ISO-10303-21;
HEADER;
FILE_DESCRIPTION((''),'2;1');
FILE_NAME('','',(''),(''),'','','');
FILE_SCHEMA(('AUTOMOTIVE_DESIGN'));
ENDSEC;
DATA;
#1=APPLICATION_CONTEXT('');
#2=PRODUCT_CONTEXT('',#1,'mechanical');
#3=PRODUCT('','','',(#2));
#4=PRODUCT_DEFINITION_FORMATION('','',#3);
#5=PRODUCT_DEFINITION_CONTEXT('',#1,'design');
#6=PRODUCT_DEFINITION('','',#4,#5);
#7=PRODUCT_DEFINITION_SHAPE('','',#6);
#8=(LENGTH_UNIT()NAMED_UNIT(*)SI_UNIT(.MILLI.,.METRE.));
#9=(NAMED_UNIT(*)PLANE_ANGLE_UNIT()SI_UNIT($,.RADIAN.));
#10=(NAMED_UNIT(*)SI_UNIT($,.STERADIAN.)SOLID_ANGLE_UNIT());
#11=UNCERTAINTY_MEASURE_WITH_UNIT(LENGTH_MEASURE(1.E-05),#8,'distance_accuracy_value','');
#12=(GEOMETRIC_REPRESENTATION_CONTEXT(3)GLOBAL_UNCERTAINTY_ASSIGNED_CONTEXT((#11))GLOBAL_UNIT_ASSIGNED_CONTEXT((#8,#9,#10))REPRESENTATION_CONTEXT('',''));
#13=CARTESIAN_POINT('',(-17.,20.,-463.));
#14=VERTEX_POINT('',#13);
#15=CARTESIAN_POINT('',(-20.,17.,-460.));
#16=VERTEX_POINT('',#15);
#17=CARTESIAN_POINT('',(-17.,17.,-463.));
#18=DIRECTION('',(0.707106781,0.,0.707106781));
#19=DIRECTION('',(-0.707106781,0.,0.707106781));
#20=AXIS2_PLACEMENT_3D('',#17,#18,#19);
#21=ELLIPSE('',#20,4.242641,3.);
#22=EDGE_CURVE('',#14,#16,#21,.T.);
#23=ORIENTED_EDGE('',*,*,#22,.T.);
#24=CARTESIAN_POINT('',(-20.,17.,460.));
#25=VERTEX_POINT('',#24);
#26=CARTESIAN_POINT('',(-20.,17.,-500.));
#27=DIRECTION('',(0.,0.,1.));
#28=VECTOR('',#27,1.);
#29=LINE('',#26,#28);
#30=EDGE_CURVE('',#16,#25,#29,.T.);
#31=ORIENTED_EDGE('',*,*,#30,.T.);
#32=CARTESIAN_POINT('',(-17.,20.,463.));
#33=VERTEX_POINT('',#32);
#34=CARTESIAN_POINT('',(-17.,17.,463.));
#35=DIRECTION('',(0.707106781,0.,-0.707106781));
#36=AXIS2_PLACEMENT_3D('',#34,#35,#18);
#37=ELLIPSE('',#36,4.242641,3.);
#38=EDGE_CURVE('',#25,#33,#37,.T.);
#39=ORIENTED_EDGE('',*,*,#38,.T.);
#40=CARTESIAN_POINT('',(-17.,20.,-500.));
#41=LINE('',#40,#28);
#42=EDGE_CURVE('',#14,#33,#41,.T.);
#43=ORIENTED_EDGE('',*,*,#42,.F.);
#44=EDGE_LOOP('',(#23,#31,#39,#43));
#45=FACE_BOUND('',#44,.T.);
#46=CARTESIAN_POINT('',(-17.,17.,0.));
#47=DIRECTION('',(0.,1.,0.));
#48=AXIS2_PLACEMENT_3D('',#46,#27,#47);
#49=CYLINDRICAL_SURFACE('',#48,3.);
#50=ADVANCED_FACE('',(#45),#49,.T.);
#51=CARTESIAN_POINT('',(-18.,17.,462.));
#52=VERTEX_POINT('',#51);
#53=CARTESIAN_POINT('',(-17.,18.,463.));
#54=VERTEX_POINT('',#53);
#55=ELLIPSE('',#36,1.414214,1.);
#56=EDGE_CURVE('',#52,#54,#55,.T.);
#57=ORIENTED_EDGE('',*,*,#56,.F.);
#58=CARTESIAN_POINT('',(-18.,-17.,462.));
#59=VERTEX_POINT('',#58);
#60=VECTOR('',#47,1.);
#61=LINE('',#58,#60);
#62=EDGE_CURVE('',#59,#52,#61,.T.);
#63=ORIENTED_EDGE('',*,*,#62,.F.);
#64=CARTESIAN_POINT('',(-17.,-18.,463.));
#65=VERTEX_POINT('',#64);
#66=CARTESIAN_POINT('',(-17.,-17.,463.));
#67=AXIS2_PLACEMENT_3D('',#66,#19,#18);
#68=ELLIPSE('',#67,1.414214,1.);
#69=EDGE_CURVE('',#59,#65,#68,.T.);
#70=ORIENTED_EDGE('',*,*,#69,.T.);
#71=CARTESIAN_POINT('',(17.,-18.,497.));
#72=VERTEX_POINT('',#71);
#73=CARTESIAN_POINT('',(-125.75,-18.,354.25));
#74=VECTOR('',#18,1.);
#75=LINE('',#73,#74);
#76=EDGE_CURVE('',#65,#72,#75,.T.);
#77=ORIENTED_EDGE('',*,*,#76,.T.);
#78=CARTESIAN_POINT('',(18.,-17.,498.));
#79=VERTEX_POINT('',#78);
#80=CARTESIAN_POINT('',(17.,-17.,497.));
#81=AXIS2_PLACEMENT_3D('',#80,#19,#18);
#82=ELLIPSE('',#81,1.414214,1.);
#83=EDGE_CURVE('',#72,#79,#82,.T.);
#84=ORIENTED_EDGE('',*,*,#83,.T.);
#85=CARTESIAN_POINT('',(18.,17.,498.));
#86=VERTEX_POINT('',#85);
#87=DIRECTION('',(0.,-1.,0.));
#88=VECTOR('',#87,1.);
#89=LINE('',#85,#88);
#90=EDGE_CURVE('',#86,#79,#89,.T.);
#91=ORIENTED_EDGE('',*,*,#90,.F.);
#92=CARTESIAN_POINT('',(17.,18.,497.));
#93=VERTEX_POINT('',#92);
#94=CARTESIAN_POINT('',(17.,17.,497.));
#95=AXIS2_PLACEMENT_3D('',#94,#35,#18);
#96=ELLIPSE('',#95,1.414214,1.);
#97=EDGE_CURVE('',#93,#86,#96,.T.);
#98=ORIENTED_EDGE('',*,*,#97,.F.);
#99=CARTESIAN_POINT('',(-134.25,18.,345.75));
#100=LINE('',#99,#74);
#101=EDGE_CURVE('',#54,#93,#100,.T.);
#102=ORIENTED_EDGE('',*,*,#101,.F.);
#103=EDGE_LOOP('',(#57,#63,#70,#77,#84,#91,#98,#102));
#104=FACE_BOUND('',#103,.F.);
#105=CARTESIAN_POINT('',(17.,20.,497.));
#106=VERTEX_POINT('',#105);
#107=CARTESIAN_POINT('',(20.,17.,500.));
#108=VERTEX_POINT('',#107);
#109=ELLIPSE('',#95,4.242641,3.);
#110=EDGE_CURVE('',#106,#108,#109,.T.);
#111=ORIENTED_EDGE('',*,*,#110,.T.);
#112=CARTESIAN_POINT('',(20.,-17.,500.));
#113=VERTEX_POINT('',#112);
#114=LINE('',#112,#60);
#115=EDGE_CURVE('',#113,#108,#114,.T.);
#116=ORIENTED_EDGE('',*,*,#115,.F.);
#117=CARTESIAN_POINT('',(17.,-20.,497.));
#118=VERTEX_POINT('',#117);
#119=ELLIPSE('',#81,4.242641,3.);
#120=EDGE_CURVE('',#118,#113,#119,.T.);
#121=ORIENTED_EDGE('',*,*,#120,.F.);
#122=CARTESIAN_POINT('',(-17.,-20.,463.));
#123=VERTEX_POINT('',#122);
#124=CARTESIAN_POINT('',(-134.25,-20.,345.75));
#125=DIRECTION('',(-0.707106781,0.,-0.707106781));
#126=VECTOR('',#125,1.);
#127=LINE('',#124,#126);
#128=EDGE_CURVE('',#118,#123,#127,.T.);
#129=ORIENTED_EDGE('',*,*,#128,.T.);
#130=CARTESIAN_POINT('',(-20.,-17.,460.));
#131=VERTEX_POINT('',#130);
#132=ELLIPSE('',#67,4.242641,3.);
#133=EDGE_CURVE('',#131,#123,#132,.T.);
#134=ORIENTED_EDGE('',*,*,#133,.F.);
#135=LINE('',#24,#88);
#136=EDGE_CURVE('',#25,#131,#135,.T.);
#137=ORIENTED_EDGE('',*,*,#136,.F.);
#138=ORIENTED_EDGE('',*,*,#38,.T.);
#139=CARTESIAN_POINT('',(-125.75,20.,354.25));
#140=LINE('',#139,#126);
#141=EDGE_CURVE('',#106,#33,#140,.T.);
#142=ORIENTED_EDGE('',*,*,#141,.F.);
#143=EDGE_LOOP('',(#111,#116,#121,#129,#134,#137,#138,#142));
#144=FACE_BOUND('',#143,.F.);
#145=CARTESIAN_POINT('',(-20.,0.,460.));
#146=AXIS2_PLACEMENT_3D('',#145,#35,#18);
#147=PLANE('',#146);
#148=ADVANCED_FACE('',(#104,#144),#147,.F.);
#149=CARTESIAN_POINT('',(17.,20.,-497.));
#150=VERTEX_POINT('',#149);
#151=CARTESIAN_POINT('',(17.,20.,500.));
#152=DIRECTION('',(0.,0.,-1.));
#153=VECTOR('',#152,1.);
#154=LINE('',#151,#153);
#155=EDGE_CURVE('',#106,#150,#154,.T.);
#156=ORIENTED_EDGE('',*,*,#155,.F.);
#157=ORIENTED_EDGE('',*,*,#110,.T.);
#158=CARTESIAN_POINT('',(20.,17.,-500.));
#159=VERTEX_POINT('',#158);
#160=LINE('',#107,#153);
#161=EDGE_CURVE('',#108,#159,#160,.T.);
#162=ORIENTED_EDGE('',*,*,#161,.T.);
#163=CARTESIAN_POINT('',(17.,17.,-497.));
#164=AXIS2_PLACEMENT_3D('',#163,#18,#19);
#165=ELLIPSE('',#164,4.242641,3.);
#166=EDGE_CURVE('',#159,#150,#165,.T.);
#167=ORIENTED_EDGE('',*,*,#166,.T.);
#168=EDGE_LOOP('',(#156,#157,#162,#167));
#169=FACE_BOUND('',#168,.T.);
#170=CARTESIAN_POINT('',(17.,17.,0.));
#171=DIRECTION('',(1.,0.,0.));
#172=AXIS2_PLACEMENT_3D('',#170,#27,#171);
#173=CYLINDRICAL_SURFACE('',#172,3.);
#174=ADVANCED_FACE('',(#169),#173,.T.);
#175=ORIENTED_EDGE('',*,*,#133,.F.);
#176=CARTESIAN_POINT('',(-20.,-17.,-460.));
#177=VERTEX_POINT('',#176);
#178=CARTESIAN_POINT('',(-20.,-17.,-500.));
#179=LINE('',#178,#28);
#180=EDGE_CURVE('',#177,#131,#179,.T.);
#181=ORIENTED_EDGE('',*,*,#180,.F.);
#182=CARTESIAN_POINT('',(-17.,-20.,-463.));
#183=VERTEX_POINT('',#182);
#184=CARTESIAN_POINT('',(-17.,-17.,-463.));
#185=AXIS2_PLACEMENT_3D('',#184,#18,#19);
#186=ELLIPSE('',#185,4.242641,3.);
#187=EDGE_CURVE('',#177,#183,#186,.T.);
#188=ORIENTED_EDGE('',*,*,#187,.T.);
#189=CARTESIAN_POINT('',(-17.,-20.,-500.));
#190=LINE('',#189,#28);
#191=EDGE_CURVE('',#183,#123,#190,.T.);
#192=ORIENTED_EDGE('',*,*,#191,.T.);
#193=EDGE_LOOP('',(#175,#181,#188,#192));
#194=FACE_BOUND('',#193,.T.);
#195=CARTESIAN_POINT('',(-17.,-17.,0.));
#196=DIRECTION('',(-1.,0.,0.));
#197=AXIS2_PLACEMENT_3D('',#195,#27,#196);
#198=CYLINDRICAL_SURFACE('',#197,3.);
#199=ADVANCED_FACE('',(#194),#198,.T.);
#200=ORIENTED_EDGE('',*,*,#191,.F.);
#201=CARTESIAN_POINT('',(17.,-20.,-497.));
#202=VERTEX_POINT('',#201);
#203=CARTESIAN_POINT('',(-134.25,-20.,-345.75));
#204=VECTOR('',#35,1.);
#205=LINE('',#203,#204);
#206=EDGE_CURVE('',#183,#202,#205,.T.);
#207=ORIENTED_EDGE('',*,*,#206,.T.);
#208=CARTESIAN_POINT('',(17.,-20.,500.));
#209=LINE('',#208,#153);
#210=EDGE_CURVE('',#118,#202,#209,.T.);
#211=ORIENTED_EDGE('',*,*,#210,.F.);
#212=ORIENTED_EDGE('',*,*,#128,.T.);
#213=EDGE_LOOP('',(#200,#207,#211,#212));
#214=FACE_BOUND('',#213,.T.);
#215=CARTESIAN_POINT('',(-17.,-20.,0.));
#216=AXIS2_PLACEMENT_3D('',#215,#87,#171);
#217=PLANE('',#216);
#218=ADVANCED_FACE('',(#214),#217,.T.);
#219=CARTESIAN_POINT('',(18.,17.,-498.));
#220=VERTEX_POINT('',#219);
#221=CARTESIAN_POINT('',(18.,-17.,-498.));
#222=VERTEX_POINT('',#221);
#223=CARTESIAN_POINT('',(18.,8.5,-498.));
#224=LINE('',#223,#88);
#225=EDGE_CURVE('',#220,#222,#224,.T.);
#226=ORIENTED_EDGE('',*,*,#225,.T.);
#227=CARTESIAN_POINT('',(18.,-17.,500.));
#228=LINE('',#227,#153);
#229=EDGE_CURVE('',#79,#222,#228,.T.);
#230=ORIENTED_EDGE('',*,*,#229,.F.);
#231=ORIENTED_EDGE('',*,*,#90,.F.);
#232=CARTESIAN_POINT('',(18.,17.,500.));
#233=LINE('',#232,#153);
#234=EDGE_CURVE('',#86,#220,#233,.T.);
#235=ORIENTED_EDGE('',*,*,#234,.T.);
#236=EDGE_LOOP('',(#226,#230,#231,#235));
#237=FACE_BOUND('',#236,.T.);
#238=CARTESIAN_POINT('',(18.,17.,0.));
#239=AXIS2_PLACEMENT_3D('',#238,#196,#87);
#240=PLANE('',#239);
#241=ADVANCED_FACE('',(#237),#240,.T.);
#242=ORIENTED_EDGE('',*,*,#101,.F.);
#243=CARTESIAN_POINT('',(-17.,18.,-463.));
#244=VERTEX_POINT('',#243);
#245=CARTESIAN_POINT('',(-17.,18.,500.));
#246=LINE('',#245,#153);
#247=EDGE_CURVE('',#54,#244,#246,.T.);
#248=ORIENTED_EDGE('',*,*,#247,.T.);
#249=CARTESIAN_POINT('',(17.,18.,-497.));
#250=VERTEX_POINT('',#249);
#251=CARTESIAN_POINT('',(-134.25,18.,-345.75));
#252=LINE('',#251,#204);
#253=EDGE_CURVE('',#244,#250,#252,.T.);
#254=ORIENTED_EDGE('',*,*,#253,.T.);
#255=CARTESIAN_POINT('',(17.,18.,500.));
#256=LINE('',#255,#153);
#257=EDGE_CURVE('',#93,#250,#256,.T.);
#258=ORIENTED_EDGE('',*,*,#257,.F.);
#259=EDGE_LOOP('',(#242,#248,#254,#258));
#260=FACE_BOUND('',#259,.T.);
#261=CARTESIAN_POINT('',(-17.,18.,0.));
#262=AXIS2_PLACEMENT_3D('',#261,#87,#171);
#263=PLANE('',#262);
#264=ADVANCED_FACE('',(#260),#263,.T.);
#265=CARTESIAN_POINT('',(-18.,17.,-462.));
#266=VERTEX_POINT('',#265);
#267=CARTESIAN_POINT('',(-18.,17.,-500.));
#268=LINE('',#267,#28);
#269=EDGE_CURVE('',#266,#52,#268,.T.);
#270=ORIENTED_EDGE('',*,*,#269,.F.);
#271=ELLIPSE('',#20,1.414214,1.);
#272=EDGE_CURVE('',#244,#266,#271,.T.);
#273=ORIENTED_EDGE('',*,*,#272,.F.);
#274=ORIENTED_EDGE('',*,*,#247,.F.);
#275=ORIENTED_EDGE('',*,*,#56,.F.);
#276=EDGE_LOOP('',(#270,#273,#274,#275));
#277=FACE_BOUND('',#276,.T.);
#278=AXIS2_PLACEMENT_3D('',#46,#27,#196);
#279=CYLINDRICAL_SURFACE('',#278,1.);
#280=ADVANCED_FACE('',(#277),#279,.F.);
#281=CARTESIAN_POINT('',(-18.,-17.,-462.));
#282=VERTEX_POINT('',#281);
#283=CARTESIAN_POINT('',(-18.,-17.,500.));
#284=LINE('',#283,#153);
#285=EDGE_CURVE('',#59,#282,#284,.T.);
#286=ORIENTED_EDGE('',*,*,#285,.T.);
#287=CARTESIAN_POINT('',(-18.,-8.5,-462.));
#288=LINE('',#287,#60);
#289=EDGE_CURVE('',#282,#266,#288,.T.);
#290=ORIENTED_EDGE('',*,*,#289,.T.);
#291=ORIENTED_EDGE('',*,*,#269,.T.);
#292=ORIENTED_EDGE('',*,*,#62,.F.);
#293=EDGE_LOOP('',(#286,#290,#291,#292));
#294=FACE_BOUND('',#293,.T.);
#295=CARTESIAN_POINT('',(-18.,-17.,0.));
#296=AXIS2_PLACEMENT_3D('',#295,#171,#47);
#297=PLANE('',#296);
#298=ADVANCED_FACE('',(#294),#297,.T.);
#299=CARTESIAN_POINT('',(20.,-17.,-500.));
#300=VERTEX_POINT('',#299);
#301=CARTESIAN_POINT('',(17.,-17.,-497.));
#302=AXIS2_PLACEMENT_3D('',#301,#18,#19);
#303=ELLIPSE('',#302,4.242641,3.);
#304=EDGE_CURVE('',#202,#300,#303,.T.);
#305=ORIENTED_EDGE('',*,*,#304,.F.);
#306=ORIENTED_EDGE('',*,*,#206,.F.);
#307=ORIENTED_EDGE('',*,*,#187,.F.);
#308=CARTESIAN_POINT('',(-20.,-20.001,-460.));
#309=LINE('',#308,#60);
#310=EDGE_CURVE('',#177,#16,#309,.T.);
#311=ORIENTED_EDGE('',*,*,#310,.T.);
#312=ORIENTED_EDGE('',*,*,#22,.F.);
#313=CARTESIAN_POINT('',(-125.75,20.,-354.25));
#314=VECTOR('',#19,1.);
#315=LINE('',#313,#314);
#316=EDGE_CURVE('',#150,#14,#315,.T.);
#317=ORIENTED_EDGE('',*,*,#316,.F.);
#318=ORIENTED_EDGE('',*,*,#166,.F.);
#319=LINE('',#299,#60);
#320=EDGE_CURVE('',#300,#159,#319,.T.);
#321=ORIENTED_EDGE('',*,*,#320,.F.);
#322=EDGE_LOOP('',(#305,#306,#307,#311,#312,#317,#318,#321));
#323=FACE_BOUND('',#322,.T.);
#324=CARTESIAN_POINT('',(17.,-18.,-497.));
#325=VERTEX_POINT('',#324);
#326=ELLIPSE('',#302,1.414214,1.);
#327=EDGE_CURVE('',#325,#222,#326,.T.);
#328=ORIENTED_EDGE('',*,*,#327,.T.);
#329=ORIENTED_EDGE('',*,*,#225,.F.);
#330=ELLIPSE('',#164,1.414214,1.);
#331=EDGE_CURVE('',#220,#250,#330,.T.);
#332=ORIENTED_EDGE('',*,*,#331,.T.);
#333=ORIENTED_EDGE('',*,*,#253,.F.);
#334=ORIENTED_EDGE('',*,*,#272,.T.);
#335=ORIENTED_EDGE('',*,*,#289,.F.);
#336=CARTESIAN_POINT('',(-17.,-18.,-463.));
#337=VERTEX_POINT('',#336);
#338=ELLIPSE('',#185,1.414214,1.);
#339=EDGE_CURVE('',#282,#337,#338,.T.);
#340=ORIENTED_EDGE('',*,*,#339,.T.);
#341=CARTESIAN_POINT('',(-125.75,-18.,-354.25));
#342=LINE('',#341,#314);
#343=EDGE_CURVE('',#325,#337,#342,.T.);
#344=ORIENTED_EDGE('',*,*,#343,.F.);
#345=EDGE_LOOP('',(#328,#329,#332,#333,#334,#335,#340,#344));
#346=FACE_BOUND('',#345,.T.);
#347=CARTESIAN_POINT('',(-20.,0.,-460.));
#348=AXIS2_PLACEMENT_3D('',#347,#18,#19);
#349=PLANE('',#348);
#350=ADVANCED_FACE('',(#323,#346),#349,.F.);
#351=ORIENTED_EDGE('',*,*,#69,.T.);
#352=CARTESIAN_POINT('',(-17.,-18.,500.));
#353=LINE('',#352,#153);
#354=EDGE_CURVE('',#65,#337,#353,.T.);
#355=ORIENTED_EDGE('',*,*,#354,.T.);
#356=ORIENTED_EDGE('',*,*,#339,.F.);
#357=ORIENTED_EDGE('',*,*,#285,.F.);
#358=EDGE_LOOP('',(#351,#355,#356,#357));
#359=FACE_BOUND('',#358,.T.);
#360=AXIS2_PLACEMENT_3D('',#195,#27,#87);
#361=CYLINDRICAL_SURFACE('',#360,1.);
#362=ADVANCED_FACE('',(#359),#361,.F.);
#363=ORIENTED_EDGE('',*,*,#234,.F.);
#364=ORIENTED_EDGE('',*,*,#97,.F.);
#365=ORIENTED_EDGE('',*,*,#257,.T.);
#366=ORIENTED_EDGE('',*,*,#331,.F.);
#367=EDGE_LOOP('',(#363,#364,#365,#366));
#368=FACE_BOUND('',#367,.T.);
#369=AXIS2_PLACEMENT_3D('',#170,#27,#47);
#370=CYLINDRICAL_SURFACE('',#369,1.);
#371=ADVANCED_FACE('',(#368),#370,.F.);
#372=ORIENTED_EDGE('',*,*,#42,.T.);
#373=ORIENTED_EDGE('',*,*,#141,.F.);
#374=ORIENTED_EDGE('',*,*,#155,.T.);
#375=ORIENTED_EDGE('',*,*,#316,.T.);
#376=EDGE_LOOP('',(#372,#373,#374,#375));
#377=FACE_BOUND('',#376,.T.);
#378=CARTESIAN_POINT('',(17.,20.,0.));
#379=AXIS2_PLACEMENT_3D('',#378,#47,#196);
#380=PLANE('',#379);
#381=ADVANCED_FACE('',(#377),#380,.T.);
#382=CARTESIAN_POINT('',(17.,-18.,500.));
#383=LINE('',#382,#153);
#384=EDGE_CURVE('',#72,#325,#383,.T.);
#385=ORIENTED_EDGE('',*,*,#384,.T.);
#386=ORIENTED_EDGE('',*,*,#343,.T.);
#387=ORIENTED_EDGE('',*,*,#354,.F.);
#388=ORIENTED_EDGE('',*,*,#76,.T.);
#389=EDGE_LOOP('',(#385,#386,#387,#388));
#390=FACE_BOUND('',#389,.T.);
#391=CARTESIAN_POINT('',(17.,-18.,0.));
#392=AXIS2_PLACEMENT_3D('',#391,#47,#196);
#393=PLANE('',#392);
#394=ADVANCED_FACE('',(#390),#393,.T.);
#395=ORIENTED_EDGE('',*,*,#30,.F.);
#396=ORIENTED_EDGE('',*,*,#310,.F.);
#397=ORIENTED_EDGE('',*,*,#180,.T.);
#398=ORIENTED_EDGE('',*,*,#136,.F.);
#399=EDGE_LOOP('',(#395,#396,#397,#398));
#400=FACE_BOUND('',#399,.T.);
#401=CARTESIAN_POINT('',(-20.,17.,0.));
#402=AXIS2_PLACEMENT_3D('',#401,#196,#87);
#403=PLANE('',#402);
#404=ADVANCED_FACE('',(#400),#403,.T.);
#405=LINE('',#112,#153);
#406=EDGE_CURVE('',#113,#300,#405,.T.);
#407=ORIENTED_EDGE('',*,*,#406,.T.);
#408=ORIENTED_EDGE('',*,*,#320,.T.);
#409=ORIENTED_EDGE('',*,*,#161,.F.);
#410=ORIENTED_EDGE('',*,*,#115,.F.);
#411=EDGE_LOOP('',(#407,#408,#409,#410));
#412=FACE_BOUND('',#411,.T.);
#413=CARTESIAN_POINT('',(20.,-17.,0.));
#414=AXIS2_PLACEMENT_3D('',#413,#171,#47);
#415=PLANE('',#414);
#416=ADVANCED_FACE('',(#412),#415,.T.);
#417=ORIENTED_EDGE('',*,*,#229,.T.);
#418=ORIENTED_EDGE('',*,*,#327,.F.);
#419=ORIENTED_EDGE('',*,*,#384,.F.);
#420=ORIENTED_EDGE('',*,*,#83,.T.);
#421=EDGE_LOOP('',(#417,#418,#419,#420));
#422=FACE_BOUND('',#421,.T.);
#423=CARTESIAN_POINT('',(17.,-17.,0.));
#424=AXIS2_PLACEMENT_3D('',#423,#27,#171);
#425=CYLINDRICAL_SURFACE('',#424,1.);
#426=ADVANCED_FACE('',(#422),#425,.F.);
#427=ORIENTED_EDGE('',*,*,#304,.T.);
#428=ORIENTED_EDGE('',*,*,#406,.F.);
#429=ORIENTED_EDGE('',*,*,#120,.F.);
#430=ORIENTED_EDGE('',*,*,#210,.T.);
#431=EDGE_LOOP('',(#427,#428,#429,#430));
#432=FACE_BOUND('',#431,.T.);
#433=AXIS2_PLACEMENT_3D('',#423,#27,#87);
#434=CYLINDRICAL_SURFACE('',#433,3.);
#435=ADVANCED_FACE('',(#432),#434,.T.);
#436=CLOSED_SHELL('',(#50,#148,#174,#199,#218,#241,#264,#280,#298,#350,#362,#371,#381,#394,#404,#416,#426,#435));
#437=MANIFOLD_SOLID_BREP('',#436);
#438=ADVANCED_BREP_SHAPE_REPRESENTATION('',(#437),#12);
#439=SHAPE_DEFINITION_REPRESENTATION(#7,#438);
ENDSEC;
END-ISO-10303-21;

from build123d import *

# Parameters (mm, degrees)
F1_DEPTH      = 500
F3_DEPTH      = 20.001
F3_DEPTH_BACK = 20.001


# Not quite as in the source:
# - a pattern or mirror of a feature is missing from the dataset's text; its kind, count and spacing are read off the source's solid


with BuildPart() as f1:
    # F0 (on Top) → F1 (new body, symmetric)
    with BuildSketch(Plane.XY):
        with BuildLine():
            Line((17, 20), (-17, 20))
            ThreePointArc((-17, 20), (-19.1213203436, 19.1213203436), (-20, 17))
            Line((-20, 17), (-20, -17))
            ThreePointArc((-20, -17), (-19.1213203436, -19.1213203436), (-17, -20))
            Line((-17, -20), (17, -20))
            ThreePointArc((17, -20), (19.1213203436, -19.1213203436), (20, -17))
            Line((20, -17), (20, 17))
            ThreePointArc((20, 17), (19.1213203436, 19.1213203436), (17, 20))
        make_face()
        with BuildLine():
            ThreePointArc((-18, 17), (-17.7071067812, 17.7071067812), (-17, 18))
            Line((-17, 18), (17, 18))
            ThreePointArc((17, 18), (17.7071067812, 17.7071067812), (18, 17))
            Line((18, 17), (18, -17))
            ThreePointArc((18, -17), (17.7071067812, -17.7071067812), (17, -18))
            Line((17, -18), (-17, -18))
            ThreePointArc((-17, -18), (-17.7071067812, -17.7071067812), (-18, -17))
            Line((-18, -17), (-18, 17))
        make_face(mode=Mode.SUBTRACT)
    extrude(amount=F1_DEPTH, both=True)

    # F2 (on Front) → F3 (cut, two sides)
    with BuildSketch(Plane.XZ) as f3_sk:
        Polygon((20, 500), (-20, 500), (-20, 460), align=None)
    f3 = extrude(amount=-F3_DEPTH, mode=Mode.SUBTRACT) + extrude(f3_sk.sketch, amount=F3_DEPTH_BACK, mode=Mode.SUBTRACT)

    # F3_copies: F3 across plane
    add(f3.mirror(Plane(origin=(0, 0, 0), x_dir=(-1, 0, 0), z_dir=(0, 0, -1))), mode=Mode.SUBTRACT)


solid = f1.part
